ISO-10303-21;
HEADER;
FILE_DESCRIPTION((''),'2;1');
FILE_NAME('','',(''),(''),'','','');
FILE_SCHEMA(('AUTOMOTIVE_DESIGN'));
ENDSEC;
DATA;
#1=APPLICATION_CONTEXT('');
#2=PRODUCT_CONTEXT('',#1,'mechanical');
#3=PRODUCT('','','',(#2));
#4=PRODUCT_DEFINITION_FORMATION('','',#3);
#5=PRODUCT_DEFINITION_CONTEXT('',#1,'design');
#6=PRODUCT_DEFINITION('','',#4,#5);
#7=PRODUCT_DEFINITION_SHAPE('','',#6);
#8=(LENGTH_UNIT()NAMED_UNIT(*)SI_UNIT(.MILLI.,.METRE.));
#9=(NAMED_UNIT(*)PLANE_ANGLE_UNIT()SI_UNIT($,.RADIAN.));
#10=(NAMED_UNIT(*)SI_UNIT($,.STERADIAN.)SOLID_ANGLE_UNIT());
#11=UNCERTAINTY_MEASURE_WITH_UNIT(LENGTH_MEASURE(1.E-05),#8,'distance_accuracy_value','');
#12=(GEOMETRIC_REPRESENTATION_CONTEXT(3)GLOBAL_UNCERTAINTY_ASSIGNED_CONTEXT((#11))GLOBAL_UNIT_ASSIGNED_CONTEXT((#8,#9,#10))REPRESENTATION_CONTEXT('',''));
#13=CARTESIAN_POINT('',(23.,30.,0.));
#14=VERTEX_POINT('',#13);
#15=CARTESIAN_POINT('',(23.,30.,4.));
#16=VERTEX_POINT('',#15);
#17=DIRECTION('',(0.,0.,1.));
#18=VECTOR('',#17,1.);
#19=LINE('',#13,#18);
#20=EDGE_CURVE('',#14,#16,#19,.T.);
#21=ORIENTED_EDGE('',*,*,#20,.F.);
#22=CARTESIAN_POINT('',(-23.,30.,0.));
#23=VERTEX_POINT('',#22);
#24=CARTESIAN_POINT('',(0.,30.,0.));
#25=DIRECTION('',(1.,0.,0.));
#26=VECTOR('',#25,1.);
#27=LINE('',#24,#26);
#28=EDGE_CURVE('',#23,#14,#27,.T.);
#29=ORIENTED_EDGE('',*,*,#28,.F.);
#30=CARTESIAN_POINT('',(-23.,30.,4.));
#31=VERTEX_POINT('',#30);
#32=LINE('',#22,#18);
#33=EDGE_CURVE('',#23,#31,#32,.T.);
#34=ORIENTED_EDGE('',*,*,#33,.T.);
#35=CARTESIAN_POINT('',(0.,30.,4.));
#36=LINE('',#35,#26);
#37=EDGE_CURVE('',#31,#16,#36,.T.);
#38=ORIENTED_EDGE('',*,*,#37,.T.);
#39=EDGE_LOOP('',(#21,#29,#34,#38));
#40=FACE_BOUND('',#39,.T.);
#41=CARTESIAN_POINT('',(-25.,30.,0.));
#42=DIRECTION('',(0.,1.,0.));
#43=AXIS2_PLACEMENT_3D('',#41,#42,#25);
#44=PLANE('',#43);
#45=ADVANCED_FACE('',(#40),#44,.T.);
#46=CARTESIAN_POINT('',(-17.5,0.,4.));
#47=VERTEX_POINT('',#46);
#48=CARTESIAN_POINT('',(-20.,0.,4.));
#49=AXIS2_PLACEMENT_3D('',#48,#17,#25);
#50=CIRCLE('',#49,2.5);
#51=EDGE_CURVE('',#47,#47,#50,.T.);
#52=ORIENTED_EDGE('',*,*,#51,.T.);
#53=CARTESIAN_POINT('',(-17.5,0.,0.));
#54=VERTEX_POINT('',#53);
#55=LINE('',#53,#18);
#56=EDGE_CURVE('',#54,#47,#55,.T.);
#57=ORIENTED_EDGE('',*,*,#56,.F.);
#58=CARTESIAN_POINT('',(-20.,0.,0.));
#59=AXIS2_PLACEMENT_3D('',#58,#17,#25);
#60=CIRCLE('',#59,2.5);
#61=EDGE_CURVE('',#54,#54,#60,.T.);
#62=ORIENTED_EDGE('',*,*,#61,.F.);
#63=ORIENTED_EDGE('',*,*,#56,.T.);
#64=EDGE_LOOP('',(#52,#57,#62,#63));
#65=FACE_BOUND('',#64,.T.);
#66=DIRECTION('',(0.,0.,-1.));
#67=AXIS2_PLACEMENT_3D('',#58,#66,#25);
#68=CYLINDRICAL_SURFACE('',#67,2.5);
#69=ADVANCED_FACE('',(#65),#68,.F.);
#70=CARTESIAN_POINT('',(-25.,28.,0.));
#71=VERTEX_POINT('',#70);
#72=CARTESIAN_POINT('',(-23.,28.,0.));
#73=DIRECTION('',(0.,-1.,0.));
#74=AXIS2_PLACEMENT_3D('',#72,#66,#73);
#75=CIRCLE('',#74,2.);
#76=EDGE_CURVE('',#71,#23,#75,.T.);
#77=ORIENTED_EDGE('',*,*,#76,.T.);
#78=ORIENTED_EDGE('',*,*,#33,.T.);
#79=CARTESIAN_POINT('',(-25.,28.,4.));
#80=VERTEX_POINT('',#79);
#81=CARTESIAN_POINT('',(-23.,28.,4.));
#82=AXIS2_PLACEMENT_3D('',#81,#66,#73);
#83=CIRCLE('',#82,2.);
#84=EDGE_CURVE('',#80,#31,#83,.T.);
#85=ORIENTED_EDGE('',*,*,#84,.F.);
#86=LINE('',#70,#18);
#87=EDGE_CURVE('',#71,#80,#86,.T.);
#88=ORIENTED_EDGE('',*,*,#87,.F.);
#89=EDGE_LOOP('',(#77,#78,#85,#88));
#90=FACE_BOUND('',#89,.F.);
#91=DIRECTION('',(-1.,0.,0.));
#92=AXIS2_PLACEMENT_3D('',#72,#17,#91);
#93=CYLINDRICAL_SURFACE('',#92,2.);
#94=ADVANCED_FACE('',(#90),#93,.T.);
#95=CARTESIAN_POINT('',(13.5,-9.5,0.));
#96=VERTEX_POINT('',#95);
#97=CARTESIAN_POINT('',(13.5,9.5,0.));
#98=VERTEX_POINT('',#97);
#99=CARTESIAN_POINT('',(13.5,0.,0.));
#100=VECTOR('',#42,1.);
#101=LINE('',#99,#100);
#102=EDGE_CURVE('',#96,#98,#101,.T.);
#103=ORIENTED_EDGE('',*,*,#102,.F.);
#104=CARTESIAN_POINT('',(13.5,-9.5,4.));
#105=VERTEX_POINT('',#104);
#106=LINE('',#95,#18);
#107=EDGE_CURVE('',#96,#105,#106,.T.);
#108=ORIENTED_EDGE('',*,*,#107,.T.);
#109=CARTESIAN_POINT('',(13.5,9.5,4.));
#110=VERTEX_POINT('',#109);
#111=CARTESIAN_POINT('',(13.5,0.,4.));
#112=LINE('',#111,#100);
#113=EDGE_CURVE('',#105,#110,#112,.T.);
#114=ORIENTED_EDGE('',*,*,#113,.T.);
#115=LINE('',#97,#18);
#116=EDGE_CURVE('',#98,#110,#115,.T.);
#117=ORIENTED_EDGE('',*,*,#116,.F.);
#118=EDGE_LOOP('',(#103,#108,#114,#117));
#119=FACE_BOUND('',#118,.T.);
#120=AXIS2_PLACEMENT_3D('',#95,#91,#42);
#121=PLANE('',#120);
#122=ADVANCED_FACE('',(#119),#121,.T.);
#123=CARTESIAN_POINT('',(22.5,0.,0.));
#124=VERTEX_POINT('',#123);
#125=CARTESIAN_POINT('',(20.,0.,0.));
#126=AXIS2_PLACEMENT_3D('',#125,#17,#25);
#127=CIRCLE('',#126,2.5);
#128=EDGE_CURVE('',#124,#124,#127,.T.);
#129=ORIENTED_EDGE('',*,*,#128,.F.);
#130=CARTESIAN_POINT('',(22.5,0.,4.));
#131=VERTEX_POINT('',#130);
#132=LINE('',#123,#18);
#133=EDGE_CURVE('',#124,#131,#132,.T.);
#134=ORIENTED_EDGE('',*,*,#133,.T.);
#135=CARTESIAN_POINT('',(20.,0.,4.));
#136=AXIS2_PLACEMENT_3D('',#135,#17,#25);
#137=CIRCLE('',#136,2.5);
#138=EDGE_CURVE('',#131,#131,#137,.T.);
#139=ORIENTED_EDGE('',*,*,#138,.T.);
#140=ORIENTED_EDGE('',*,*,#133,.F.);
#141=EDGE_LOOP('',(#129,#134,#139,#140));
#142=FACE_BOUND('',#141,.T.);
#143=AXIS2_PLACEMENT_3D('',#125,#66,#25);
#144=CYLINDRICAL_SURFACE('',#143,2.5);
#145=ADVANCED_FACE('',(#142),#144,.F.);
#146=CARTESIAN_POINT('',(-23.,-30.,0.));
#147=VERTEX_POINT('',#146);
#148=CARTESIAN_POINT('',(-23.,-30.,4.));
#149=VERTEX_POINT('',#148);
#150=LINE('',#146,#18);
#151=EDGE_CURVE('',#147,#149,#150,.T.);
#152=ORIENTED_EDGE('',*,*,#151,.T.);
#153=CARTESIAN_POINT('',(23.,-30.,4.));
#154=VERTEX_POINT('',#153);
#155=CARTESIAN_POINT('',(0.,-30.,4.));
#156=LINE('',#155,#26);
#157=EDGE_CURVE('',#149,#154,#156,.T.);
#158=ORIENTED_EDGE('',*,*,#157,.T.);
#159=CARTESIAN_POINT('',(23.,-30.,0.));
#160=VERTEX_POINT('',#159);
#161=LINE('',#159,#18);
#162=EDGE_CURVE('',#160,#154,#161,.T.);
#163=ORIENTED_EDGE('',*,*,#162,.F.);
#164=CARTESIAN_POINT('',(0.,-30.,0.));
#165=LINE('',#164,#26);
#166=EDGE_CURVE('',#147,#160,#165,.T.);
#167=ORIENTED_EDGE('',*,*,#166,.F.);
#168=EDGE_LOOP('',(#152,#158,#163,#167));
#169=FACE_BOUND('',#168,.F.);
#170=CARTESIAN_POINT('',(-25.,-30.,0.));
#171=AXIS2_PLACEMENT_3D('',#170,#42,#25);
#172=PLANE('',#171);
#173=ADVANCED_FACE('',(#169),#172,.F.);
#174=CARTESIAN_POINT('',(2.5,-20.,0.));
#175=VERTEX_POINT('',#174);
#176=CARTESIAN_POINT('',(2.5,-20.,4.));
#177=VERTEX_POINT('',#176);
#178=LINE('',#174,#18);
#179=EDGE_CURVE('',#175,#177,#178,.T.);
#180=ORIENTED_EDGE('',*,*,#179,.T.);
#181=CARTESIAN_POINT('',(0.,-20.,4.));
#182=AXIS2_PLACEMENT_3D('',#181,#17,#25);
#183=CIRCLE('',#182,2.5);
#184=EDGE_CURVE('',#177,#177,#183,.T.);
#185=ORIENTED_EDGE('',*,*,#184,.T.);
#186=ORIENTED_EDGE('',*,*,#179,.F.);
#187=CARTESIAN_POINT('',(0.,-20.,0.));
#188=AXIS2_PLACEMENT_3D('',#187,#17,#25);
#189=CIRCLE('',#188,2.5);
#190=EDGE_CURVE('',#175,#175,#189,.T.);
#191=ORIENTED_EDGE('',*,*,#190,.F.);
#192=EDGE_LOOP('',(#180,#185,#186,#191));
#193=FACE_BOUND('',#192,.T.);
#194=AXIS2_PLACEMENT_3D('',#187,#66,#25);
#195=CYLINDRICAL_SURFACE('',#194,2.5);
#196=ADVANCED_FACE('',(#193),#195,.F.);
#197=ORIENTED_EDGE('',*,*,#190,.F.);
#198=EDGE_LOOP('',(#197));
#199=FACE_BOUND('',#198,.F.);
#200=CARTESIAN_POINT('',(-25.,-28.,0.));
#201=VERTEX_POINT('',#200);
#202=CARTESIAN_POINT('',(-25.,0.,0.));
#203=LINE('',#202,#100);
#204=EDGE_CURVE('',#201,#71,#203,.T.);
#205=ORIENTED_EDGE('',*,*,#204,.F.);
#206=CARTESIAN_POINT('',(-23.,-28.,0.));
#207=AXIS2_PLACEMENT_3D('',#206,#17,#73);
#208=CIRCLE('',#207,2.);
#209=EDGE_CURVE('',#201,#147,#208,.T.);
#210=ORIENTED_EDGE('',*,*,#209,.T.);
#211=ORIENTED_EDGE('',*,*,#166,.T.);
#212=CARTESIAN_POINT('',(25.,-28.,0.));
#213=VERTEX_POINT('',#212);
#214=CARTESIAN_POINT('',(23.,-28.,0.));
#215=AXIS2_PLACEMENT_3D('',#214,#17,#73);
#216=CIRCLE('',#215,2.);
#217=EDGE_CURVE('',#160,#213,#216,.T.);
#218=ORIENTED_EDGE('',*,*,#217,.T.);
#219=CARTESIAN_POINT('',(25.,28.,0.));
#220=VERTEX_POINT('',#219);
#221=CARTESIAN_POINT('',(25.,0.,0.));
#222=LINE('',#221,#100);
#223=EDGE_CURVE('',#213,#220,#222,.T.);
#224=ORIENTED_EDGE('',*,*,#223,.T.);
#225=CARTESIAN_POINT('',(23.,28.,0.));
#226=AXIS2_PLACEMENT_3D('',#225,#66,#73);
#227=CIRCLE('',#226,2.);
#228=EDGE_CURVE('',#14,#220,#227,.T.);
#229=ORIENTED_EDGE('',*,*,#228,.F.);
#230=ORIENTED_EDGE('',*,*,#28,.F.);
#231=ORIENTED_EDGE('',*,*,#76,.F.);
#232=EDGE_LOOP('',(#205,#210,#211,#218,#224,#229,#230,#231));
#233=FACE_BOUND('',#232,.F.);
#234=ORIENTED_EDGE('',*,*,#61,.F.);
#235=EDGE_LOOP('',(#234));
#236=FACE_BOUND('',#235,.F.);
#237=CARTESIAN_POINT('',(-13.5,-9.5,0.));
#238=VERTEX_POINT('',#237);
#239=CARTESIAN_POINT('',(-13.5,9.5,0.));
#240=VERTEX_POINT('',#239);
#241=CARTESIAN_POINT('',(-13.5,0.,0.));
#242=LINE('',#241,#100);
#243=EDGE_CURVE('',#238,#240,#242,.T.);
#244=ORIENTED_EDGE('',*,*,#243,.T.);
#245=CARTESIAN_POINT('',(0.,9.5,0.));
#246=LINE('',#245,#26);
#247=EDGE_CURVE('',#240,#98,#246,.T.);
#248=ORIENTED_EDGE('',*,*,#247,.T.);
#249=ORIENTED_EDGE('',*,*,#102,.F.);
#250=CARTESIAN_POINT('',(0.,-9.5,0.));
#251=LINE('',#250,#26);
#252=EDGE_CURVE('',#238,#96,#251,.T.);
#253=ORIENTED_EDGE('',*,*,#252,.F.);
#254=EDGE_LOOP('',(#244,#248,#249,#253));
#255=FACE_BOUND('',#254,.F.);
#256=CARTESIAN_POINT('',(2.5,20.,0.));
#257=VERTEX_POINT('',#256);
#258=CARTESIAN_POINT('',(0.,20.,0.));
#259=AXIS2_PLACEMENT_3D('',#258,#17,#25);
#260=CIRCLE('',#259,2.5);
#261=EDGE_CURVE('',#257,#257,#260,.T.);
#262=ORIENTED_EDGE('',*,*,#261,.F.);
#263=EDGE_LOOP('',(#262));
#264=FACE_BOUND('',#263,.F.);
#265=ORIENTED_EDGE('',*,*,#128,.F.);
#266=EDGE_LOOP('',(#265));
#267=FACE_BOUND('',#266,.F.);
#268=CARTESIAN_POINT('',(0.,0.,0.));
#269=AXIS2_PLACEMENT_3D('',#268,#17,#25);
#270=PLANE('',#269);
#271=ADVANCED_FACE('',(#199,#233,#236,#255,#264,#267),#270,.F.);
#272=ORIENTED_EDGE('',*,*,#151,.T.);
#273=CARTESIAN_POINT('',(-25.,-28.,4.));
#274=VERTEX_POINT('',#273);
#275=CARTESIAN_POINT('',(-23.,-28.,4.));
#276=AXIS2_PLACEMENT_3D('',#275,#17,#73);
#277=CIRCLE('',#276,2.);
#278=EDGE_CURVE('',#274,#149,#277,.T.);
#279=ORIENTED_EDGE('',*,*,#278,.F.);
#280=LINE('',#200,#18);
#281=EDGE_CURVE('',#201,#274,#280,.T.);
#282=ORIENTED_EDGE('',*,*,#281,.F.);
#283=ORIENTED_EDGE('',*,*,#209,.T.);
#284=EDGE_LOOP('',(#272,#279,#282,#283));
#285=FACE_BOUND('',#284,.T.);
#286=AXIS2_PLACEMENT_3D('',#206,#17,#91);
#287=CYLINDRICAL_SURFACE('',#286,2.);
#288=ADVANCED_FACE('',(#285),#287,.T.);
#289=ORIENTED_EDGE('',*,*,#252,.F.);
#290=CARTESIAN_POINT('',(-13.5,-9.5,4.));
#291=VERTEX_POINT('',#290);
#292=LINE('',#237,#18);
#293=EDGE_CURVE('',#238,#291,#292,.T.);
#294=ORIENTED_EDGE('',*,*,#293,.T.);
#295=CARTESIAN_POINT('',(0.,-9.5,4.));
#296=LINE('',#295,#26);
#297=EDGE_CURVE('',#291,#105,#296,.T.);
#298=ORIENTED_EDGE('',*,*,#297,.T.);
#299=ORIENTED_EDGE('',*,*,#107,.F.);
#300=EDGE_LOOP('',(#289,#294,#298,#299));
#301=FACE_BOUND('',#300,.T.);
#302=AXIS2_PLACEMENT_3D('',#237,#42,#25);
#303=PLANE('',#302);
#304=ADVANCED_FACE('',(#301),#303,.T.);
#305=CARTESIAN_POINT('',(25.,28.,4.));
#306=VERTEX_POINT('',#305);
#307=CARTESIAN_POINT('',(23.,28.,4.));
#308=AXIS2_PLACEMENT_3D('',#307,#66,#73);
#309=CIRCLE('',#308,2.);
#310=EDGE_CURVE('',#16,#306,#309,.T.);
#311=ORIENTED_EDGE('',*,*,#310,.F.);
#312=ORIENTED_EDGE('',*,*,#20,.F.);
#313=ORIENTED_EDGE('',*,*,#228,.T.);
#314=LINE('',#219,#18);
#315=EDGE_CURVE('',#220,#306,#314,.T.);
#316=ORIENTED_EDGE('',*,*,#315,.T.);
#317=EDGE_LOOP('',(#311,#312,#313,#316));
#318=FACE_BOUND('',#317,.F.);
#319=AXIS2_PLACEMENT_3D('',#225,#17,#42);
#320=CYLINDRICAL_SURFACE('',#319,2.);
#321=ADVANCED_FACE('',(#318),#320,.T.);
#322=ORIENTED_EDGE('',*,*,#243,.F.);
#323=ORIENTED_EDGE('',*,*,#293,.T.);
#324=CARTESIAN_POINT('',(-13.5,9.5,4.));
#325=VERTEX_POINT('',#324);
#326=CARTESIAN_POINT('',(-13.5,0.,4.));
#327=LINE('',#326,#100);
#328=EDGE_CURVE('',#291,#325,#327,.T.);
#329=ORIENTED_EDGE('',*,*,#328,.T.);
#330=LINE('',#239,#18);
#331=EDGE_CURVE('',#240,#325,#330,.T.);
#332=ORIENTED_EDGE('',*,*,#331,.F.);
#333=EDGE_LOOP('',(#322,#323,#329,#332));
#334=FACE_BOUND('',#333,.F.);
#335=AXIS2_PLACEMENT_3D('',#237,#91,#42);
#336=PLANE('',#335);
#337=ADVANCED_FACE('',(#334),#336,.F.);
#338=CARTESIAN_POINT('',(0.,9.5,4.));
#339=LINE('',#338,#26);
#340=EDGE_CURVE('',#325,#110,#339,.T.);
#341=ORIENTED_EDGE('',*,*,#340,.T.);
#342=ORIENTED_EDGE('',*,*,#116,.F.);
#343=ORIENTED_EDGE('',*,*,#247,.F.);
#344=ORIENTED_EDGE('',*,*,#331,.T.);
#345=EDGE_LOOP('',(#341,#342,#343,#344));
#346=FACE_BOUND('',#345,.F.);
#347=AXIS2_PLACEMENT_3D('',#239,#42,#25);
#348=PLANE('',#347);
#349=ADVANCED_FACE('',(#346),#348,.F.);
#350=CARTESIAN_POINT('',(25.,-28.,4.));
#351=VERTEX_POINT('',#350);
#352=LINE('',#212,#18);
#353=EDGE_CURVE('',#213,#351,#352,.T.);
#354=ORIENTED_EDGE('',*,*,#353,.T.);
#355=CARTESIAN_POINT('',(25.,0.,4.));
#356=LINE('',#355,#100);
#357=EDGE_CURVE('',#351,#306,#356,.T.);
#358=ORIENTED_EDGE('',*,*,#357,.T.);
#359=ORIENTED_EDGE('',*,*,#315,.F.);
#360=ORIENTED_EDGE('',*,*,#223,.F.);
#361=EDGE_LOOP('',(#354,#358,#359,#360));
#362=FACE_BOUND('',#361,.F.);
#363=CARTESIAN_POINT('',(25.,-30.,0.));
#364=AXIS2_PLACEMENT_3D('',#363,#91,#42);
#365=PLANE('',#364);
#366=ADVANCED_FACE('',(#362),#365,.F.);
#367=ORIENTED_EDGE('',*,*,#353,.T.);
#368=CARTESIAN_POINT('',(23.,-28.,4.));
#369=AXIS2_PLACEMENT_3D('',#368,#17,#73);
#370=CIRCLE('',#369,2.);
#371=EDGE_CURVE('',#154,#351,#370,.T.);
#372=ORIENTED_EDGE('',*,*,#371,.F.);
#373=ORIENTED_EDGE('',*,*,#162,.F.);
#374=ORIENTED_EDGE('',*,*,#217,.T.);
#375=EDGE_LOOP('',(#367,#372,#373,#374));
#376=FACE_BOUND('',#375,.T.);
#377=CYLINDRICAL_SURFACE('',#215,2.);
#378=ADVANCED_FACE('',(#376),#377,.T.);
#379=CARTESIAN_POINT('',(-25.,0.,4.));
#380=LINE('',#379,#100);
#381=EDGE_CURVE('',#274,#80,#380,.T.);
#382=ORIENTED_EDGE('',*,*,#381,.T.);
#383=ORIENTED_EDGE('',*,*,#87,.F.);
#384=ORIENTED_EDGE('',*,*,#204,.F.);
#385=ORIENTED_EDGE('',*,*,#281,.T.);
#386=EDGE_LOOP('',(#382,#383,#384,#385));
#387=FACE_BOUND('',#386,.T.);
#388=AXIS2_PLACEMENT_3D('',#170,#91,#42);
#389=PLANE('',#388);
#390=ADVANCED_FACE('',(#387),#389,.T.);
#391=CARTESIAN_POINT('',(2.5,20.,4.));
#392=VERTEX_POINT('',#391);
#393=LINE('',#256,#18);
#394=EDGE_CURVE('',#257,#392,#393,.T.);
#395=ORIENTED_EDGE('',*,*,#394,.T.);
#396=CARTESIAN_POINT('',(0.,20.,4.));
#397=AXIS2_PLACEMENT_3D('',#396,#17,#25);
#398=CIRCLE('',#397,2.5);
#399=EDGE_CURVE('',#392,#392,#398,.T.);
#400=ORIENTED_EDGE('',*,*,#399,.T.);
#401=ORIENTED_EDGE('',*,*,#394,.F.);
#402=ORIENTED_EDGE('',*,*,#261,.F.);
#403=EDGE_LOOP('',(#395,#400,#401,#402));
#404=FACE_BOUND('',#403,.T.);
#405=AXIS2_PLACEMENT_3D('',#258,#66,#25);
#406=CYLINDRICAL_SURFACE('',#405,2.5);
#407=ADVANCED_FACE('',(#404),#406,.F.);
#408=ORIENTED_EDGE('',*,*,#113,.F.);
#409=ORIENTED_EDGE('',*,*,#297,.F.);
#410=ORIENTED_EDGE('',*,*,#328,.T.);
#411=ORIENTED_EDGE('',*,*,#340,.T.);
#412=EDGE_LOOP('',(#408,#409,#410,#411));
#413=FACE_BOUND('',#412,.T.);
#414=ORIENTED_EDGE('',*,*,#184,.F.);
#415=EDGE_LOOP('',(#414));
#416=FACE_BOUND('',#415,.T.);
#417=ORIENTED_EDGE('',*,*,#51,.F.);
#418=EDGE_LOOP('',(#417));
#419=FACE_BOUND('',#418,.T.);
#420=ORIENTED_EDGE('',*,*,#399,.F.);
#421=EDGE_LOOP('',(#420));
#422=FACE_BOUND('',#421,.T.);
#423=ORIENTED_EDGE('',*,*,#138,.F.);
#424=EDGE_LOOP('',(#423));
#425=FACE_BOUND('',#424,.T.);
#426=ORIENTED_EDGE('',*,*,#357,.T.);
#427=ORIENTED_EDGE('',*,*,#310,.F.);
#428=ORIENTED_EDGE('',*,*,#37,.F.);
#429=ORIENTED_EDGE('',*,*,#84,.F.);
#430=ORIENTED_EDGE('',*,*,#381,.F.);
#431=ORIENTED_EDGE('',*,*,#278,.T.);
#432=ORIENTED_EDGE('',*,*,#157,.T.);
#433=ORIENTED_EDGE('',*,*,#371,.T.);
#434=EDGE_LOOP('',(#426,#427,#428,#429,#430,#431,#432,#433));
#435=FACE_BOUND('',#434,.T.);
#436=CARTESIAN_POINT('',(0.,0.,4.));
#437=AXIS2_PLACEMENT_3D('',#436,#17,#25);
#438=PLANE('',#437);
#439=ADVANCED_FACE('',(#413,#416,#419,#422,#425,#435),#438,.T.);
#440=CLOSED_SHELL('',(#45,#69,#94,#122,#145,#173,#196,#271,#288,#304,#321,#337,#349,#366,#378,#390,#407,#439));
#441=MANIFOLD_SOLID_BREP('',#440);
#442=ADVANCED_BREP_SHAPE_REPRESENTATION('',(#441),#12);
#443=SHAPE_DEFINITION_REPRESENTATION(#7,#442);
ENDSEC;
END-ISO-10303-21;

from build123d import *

# Parameters (mm, degrees)
F0_W     = 50
F0_H     = 60
F0_R     = 2.5
F0_W_2   = 27
F0_H_2   = 19
F1_DEPTH = 4
F2_R     = 2


with BuildPart() as f1:
    # F0 (on Top) → F1 (new body)
    with BuildSketch(Plane.XY):
        Rectangle(F0_W, F0_H)
        with Locations((0, -20)):
            Circle(F0_R, mode=Mode.SUBTRACT)
        with Locations((-20, 0)):
            Circle(F0_R, mode=Mode.SUBTRACT)
        Rectangle(F0_W_2, F0_H_2, mode=Mode.SUBTRACT)
        with Locations((20, 0)):
            Circle(F0_R, mode=Mode.SUBTRACT)
        with Locations((0, 20)):
            Circle(F0_R, mode=Mode.SUBTRACT)
    extrude(amount=F1_DEPTH)

    # F2
    f2_edges = [f1.edges().sort_by_distance(p)[0] for p in [
        (25, 30, 2),
        (25, -30, 2),
        (-25, 30, 2),
        (-25, -30, 2),
    ]]
    fillet(f2_edges, radius=F2_R)


solid = f1.part
